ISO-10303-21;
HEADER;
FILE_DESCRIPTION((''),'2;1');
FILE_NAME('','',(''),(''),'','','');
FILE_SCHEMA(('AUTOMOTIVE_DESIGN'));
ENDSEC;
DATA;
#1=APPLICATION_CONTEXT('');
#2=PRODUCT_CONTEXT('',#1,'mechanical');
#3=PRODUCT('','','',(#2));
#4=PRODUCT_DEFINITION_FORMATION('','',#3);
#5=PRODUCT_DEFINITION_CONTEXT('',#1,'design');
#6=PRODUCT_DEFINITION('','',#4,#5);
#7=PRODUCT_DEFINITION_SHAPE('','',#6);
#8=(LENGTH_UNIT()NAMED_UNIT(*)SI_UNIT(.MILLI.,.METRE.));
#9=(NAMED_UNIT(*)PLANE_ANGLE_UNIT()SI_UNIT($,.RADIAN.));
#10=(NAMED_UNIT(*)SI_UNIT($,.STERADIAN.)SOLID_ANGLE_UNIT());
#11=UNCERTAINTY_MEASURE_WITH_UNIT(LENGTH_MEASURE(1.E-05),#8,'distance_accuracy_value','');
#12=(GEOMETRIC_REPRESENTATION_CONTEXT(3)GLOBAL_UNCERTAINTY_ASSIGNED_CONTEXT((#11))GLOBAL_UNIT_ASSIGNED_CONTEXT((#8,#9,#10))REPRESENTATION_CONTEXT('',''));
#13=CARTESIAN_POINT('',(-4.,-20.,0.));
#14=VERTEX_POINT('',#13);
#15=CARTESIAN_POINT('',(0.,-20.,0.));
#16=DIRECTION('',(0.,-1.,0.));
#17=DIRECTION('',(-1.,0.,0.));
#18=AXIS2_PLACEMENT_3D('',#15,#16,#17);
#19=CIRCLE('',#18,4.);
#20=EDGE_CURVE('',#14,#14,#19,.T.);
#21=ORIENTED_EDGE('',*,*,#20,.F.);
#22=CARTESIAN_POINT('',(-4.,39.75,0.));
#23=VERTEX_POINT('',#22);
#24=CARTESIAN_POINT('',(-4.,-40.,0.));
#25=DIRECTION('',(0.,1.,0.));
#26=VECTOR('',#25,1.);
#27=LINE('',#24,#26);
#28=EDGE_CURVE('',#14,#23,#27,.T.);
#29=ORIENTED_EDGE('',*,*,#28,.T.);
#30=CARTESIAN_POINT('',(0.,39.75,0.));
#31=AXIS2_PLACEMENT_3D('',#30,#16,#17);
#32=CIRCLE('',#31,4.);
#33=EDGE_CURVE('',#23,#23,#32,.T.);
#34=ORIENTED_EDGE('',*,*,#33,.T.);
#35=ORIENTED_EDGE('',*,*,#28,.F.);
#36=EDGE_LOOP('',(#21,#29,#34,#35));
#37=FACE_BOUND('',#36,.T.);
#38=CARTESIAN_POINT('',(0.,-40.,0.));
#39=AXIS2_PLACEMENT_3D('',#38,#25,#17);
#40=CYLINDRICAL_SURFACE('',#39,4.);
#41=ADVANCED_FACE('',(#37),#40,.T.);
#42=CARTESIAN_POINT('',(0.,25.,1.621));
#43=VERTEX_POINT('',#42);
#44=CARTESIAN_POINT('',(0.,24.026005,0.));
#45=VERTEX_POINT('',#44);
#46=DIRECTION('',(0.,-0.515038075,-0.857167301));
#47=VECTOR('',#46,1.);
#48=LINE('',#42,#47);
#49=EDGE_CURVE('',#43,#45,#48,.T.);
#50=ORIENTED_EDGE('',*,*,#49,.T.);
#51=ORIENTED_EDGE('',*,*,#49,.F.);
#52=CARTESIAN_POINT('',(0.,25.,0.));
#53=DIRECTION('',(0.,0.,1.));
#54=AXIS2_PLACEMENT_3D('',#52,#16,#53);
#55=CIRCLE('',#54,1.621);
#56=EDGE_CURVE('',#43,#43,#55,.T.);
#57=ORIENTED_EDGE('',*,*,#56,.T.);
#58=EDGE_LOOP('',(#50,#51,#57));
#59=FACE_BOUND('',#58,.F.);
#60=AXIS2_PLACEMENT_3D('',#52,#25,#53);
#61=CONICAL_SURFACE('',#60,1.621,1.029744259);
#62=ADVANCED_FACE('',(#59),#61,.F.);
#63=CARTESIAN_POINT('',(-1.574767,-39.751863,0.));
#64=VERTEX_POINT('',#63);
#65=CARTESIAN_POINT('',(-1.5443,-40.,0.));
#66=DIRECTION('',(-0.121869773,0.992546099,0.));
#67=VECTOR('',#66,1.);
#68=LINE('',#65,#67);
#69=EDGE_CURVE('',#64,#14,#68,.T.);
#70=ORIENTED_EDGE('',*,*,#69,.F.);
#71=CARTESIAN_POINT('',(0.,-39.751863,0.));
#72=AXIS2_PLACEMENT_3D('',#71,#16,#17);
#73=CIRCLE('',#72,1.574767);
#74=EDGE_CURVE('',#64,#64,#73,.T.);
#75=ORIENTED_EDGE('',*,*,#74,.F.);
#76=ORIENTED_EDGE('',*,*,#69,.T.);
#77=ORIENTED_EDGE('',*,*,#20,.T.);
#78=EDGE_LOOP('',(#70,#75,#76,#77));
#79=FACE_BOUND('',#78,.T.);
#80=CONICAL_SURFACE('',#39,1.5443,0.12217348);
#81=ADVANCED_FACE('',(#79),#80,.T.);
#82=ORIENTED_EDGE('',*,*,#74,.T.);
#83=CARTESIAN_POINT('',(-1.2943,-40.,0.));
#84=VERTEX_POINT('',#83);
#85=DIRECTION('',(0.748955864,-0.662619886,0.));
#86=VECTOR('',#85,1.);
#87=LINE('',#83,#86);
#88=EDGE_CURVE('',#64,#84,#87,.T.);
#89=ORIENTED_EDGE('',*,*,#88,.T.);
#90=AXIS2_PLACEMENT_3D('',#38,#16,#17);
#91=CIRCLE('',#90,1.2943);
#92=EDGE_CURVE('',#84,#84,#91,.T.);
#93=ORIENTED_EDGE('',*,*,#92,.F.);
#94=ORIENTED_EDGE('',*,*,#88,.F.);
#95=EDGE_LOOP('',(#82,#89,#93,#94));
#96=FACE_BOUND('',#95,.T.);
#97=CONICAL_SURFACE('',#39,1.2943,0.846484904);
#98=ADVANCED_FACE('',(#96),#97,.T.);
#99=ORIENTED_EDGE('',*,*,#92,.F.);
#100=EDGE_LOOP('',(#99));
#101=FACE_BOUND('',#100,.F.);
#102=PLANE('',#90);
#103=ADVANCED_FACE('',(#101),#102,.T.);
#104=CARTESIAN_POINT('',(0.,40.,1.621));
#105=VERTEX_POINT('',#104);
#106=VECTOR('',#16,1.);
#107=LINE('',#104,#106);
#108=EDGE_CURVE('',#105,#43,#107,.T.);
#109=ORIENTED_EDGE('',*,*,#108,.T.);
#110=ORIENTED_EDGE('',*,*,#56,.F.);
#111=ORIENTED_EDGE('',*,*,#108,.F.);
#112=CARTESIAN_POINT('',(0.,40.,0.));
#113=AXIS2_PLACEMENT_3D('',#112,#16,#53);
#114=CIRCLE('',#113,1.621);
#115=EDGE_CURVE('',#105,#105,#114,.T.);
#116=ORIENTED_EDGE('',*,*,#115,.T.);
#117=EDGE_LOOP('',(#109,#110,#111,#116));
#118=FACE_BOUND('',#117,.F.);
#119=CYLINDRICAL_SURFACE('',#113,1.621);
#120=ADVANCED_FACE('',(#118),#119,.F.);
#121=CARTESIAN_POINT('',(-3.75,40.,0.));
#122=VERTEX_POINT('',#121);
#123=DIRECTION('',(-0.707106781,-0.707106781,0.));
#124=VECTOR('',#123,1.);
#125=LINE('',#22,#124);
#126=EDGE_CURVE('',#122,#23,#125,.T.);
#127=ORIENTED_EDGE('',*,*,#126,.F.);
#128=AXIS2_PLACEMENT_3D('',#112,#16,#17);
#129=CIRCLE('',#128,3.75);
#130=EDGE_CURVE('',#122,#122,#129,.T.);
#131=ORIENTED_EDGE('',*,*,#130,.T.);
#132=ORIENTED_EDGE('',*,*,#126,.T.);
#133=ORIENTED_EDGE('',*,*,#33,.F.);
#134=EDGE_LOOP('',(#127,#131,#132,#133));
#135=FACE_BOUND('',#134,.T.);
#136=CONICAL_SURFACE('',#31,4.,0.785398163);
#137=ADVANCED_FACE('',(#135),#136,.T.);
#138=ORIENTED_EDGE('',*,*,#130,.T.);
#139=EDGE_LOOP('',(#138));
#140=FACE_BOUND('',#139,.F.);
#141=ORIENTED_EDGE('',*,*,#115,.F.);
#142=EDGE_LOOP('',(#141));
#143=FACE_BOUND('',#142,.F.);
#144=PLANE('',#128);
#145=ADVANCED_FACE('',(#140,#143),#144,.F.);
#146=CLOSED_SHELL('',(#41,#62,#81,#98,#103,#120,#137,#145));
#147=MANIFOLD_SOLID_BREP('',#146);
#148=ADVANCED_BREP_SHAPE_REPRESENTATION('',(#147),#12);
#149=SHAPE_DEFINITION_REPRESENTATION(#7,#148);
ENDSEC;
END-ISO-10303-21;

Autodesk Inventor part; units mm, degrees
ref_plane "YZ Plane" through (0, 0, 0) normal (1, 0, 0) x (0, 1, 0)
ref_plane "XZ Plane" through (0, 0, 0) normal (0, 1, 0) x (-1, 0, 0)
ref_plane "XY Plane" through (0, 0, 0) normal (0, 0, 1) x (1, 0, 0)
sketch "Sketch1" plane through (0, 0, 0) normal (0, 0, 1) x (1, 0, 0)
  line L0 (-4.8, 0) -> (0.8, 0) construction
  line L1 (0, -56) -> (0, 56) construction
  line L2 (-4, 40) -> (0, 40)
  line L3 (0, 40) -> (0, -40)
  line L4 (0, -40) -> (-4, -40)
  line L5 (-4, -40) -> (-4, 40)
  line L6 (-1.5443, -40) -> (-4, -20)
  point P0 (0, 0)
  dimension "d0" = 8
  dimension "d1" = 80
  dimension "d13" = 20
  dimension "d14" = 3.0886
  dimension "d17" = 7
revolve "Revolution1" add sketch "Sketch1" angle 360 about axis through (0, 40, 0) along (0, -1, 0) contours L2 L3 L4 L6 L5
sketch "Sketch2" plane through (0, 40, 0) normal (0, 1, 0) x (1, 0, 0)
  circle A0 centre (0, 0) radius 4
hole "Hole1" at (0, 40, 0) direction (0, -1, 0) diameter 3.242 depth 15 tip angle 118 thread size "M4x0.7" class "6H" standard "ISO Metric profile"
chamfer "Chamfer1" distance 0.25 angle 45 2 edges at (1.5443, -40, 0) (4, 40, 0)
properties part number "FCT-01-001C" material "Aço SAE 1045"
